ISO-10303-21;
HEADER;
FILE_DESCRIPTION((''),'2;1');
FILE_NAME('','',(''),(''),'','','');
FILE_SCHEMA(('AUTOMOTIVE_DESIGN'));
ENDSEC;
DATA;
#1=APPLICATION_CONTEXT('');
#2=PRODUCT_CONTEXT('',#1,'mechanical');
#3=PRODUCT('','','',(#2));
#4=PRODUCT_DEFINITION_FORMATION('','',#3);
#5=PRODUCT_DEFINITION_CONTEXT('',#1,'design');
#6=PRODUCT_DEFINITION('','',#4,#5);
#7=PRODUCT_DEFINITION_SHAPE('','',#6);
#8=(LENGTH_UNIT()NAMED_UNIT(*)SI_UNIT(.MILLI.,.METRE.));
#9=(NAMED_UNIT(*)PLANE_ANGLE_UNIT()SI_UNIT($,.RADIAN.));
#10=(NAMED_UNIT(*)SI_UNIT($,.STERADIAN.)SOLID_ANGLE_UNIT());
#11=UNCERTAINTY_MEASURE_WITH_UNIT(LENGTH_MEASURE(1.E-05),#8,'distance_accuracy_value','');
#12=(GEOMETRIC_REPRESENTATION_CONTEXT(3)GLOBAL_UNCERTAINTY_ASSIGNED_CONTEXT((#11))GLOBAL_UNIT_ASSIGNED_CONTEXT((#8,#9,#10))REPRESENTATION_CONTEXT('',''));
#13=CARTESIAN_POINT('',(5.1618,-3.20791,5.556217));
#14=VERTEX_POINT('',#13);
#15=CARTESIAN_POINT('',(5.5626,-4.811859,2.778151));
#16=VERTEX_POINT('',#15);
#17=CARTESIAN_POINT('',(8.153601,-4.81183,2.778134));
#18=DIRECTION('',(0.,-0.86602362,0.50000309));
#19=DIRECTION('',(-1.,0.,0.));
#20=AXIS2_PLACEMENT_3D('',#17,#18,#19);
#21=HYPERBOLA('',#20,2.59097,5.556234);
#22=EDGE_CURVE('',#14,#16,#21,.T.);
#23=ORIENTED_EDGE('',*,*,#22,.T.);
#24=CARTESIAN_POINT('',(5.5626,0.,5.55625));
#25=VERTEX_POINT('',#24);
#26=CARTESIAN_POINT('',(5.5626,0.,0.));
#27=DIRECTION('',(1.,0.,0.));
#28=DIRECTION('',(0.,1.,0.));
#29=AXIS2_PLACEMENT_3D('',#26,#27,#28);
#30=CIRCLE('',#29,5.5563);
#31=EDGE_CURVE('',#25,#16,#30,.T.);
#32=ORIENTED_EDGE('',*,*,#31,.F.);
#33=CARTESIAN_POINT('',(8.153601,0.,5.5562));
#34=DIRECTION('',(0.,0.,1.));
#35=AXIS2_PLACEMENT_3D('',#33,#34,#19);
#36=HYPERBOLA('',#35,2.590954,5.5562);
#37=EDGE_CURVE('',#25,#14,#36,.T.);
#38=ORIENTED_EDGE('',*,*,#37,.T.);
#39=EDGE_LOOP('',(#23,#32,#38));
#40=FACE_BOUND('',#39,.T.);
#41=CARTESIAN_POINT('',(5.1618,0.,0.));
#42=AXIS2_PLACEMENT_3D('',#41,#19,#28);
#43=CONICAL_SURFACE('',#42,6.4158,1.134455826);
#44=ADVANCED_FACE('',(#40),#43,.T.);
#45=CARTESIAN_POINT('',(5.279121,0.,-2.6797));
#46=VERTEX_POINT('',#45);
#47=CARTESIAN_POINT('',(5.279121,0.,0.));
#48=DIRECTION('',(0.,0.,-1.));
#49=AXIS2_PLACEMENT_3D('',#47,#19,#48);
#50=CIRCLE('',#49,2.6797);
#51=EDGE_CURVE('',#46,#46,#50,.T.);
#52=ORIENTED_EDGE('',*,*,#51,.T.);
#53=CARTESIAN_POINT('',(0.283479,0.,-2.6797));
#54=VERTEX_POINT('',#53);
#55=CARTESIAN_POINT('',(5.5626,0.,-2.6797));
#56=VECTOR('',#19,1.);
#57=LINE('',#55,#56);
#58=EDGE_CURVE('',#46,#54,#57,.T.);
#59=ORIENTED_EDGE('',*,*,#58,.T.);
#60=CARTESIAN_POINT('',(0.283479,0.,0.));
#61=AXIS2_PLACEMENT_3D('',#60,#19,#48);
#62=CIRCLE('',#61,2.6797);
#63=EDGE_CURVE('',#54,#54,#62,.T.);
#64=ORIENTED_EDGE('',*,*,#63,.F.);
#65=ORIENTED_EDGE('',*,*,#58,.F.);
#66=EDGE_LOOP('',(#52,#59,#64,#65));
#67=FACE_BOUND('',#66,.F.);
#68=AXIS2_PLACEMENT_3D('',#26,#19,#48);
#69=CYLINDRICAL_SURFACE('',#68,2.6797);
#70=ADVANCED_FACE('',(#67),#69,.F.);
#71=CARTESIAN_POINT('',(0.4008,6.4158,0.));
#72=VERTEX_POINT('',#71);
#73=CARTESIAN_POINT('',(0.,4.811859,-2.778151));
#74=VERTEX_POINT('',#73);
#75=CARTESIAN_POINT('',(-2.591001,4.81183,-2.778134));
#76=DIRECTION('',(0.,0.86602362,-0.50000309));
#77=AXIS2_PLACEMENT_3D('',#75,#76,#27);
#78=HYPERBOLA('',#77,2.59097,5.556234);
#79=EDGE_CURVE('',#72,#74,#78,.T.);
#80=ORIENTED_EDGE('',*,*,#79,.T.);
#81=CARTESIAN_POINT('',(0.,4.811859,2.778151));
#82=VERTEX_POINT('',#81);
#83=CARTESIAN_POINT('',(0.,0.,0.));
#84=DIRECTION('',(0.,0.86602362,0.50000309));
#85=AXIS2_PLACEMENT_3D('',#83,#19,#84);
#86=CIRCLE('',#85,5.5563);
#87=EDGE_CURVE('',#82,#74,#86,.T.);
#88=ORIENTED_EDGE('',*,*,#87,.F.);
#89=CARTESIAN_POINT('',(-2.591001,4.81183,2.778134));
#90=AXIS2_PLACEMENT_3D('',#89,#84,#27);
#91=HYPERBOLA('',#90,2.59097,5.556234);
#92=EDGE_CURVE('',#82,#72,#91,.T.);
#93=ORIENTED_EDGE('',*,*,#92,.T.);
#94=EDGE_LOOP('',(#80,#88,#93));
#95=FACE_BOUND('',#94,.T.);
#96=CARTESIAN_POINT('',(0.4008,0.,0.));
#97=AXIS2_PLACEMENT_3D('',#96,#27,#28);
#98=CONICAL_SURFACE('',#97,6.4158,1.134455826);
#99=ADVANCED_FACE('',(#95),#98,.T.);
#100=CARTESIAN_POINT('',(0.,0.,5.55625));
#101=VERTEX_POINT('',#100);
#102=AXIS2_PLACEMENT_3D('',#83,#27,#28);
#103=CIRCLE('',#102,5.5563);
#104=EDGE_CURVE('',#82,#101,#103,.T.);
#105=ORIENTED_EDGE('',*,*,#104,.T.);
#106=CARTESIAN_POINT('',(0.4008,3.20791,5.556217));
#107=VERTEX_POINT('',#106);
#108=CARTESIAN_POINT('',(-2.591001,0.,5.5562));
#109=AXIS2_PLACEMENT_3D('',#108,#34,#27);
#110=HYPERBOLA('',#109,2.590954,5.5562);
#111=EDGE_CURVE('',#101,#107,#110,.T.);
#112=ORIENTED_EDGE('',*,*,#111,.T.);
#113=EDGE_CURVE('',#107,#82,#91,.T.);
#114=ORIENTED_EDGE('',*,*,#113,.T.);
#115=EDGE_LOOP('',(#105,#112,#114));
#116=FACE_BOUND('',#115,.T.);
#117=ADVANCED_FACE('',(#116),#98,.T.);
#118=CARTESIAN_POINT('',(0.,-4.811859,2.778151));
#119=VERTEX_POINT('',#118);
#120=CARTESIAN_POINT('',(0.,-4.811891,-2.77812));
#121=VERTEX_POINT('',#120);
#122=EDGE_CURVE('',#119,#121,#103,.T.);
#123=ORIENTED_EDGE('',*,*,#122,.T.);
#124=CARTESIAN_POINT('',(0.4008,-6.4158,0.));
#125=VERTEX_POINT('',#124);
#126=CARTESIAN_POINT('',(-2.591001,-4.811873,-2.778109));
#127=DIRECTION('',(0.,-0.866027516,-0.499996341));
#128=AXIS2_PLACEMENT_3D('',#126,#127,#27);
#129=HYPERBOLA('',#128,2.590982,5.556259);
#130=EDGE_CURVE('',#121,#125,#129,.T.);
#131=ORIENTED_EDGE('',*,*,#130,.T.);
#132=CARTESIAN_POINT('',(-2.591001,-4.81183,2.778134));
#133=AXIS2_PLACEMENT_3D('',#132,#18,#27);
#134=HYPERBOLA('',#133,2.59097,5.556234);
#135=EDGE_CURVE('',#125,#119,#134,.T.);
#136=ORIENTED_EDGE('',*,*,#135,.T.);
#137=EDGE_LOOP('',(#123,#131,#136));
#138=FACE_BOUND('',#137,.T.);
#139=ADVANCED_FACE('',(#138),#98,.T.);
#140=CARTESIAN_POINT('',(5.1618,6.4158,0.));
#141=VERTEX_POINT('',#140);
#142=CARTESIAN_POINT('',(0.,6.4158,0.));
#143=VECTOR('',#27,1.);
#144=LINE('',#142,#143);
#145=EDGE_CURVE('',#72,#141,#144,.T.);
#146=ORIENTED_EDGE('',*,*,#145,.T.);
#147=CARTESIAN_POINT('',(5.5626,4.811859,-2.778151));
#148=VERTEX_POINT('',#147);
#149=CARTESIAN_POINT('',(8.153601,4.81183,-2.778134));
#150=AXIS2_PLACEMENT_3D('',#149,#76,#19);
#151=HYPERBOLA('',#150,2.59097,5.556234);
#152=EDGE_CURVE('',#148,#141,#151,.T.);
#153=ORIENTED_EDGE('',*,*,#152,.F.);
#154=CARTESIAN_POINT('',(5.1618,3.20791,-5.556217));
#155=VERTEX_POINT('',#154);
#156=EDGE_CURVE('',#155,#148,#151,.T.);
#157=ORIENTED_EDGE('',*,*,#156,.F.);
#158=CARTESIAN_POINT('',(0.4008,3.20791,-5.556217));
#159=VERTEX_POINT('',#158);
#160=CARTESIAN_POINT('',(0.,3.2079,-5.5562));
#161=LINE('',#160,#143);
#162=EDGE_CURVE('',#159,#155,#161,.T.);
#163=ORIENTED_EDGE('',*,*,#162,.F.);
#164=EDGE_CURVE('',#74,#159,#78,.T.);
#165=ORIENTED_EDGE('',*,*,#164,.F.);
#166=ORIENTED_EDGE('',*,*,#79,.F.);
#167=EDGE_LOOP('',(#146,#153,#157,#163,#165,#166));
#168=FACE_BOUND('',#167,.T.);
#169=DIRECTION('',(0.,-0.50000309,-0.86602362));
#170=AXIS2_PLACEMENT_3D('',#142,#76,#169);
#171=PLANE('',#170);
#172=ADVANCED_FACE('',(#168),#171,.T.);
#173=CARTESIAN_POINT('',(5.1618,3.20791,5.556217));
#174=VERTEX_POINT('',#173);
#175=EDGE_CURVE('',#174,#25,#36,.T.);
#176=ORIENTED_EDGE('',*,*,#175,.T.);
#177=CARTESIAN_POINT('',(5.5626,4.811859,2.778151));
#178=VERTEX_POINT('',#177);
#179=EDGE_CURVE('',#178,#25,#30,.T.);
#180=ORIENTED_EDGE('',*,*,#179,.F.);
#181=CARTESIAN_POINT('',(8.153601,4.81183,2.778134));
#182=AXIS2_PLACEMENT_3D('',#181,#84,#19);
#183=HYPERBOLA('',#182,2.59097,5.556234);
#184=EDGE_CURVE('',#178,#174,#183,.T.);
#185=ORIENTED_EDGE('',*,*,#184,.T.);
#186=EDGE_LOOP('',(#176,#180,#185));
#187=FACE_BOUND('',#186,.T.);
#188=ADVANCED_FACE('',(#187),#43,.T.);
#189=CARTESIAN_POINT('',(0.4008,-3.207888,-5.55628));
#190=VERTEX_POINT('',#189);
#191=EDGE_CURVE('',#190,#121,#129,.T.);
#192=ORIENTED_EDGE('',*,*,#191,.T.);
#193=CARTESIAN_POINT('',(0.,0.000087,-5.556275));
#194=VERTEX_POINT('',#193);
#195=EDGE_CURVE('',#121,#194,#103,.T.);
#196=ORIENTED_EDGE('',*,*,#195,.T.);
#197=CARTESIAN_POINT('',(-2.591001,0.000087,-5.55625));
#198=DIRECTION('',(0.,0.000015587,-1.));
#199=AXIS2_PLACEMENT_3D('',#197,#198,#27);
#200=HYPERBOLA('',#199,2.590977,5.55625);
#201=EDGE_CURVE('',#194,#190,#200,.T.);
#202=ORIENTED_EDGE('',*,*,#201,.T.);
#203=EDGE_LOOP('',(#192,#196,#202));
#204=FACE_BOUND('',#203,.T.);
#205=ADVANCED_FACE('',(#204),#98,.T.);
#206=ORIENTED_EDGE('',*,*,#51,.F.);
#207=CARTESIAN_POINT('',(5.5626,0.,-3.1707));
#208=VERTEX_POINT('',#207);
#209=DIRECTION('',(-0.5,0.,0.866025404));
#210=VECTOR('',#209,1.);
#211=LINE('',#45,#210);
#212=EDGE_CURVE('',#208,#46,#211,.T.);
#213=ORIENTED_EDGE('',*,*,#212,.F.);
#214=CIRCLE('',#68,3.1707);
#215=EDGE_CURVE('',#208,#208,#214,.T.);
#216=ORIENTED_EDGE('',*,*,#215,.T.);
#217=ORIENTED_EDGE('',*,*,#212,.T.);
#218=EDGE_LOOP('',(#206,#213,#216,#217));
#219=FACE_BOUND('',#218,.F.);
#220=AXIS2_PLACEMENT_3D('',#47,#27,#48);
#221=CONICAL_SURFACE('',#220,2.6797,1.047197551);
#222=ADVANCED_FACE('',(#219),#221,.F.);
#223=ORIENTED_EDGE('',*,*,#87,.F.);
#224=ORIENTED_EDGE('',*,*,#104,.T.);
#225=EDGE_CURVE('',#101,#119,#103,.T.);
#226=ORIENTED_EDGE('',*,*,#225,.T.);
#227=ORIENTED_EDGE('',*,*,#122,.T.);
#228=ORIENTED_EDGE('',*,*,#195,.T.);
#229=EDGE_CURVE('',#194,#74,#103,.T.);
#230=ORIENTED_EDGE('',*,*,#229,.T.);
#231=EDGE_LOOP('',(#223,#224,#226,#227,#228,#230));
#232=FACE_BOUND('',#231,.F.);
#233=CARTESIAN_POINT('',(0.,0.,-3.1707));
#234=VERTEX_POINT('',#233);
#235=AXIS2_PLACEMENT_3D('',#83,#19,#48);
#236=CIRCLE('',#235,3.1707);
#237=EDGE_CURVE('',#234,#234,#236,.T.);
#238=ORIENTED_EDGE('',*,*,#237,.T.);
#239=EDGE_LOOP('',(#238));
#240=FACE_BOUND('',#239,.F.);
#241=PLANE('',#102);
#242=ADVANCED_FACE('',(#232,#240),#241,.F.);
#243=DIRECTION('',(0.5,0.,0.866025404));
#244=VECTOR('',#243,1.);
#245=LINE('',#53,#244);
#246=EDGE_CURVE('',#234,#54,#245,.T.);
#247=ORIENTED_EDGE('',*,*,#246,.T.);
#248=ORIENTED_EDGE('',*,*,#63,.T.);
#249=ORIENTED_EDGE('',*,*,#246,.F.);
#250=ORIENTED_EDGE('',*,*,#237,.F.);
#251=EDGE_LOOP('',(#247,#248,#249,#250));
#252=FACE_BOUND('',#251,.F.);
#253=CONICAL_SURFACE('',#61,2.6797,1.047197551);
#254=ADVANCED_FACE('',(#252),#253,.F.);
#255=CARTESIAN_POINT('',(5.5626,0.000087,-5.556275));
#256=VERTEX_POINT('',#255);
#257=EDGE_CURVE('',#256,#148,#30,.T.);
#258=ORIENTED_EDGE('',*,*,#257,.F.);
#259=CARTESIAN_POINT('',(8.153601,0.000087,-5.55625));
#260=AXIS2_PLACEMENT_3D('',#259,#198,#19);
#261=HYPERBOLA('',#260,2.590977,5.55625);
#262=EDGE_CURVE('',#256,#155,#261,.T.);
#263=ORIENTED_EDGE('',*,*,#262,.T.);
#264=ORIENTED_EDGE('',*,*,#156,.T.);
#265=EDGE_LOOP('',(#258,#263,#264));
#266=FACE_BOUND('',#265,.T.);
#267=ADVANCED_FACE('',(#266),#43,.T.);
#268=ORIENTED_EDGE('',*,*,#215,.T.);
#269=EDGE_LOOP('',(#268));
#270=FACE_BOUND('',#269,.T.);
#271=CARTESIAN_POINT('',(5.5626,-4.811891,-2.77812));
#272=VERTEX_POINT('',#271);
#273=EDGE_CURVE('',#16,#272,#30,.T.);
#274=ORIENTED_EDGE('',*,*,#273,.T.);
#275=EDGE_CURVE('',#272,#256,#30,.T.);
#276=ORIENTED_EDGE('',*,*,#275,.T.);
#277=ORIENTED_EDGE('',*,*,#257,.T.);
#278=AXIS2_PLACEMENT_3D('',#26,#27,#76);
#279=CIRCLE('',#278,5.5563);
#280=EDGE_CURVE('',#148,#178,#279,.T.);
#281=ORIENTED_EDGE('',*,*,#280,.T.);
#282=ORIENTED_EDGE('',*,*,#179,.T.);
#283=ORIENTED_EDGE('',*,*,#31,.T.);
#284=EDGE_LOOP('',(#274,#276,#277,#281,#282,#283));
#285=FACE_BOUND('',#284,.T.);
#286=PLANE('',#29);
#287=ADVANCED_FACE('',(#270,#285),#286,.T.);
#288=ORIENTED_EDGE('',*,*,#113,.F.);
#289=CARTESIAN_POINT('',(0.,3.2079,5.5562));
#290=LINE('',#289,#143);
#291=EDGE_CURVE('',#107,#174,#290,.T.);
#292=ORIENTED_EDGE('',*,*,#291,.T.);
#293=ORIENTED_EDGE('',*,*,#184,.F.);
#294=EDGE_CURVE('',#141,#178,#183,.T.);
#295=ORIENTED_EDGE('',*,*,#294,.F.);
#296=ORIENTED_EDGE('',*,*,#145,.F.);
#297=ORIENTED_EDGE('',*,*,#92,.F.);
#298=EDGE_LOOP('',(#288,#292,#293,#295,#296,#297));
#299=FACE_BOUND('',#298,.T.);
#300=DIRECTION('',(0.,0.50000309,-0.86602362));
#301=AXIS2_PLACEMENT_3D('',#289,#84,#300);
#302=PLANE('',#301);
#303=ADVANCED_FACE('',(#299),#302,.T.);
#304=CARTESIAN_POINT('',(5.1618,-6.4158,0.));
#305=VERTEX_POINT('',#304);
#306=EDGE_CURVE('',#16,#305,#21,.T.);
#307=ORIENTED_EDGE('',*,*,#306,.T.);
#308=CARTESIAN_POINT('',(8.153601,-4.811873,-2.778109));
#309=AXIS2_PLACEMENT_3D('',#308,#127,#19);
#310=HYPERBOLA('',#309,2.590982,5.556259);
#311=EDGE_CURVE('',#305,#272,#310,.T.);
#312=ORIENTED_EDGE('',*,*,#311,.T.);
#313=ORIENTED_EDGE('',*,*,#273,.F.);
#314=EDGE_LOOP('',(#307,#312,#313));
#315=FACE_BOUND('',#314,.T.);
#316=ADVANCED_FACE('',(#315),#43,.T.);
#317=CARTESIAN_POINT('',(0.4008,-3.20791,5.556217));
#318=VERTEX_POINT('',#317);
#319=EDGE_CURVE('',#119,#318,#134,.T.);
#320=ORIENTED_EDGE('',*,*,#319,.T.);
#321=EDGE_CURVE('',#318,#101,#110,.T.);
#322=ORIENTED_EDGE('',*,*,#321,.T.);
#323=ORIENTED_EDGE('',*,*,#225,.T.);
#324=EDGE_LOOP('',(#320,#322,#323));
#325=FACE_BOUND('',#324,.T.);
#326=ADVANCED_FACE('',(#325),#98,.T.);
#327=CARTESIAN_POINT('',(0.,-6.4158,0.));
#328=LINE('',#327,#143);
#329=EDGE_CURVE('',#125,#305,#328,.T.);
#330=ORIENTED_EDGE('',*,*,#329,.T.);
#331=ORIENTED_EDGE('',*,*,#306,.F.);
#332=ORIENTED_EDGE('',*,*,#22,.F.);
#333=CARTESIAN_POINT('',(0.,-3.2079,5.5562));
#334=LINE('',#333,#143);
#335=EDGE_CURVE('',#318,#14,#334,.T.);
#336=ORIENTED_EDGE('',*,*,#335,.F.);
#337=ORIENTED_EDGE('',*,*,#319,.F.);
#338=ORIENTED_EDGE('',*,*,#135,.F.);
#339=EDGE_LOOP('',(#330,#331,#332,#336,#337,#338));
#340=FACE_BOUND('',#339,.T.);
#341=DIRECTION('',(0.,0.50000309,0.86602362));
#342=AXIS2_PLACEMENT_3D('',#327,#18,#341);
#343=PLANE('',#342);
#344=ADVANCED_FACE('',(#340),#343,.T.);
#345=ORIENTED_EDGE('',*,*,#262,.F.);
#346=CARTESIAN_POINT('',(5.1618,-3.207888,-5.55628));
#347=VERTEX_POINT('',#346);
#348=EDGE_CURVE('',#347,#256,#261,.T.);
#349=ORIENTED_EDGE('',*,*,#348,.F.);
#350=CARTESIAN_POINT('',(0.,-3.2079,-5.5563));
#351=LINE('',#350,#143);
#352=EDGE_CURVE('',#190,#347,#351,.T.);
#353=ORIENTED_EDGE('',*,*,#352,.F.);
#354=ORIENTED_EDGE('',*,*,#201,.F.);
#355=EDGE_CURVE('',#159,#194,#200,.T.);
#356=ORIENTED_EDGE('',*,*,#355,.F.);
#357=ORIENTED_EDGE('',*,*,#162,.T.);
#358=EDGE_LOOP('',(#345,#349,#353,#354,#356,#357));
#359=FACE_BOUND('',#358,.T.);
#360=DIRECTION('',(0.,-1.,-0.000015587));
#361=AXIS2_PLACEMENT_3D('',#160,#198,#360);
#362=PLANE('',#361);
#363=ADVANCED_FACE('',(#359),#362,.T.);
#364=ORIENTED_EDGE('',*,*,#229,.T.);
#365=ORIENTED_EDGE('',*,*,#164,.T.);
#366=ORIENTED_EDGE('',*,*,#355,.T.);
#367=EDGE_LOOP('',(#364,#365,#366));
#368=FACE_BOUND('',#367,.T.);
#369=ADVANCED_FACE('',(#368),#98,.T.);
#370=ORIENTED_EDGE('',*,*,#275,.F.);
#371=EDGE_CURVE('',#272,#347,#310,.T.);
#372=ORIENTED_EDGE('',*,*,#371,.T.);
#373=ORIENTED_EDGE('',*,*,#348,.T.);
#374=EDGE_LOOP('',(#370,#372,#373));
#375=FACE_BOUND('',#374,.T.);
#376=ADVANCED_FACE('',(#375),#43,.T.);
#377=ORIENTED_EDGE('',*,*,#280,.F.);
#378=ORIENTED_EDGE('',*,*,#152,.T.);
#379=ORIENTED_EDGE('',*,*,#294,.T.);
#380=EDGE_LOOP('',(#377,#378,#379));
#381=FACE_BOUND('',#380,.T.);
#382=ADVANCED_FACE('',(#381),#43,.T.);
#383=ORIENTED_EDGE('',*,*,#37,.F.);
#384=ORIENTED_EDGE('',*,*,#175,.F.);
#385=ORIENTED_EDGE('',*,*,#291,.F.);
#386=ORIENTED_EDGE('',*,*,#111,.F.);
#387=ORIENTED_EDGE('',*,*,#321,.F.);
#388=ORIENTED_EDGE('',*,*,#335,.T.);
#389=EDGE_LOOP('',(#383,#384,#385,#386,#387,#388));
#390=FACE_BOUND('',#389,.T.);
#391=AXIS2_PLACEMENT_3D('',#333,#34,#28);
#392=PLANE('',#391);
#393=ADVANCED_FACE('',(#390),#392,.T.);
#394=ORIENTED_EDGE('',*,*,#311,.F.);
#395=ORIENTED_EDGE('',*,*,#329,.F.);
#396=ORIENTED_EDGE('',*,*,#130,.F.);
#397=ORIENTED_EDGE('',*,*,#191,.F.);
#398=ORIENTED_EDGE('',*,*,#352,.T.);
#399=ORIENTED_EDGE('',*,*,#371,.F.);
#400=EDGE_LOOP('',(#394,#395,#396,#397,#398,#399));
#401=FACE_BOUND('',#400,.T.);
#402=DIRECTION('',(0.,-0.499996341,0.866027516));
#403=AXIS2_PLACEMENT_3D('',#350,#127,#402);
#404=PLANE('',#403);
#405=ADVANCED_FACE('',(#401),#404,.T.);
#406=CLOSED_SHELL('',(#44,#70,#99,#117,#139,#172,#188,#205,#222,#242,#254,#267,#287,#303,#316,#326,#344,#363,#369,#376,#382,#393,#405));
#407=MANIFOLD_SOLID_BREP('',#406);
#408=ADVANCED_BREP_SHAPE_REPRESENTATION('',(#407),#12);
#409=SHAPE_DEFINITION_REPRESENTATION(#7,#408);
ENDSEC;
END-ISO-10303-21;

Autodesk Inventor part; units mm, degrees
ref_plane "YZ Plane" through (0, 0, 0) normal (1, 0, 0) x (0, 1, 0)
ref_plane "XZ Plane" through (0, 0, 0) normal (0, 1, 0) x (-1, 0, 0)
sketch "Sketch1" plane through (0, 0, 0) normal (1, 0, 0) x (0, 1, 0)
  line L0 (-6.4158, 0) -> (-3.2079, 5.5562)
  line L1 (-3.2079, 5.5562) -> (3.2079, 5.5562)
  line L2 (3.2079, 5.5562) -> (6.4158, 0)
  line L3 (6.4158, 0) -> (3.2079, -5.5562)
  line L4 (3.2079, -5.5562) -> (-3.2079, -5.5563)
  line L5 (-3.2079, -5.5563) -> (-6.4158, 0)
  point P0 (0, 0)
  point P1 (0, 0)
  dimension "d0" = 12.8316
extrude "Body" add sketch "Sketch1" along normal blind 5.5626
sketch "Sketch2" plane through (0, 0, 0) normal (0, 0, 1) x (1, 0, 0)
  line L0 (0, 3.2079) -> (0, 6.4158) projected
  line L1 (0, 6.4158) -> (5.5626, 6.4158) projected
  line L2 (5.5626, 3.2079) -> (5.5626, 6.4158) projected
  line L3 (-1.1125, 0) -> (6.6751, 0) projected
  line L4 (0.4008, 6.4158) -> (0, 5.5563)
  line L5 (5.1618, 6.4158) -> (5.5626, 5.5563)
  dimension "d3" = 25
  dimension "d4" = 25
  dimension "d5" = 11.1125
  dimension "d6" = 11.1125
revolve "Chamfer1" cut sketch "Sketch2" angle 360 about axis through (-10, 0, 0) along (1, 0, 0)
sketch "Sketch3" plane through (5.5626, 0, 0) normal (1, 0, 0) x (0, 0, -1)
  arc A0 (-2.7781, -4.8119) -> (2.7781, -4.8119) centre (0, 0) ccw projected
hole "Thread" at (5.5626, 0, 0) direction (-1, 0, 0) diameter 5.3594 end through all thread size "1/4-28 UNF" class "2B" standard "ANSI Unified Screw Threads"
chamfer "Chamfer2" distance 0.491 angle 30 1 edges at (5.5626, 0, 2.6797) measured on face at (5.5626, 4.5706, -0.1077)
chamfer "Chamfer3" distance 0.491 angle 30 1 edges at (0, 0, 2.6797) measured on face at (0, 4.5706, -0.1077)
ref_plane "Work Plane1" through (-12.3002, 0, 0) normal (0, -0.8660254, -0.5) x (1, 0, 0)
equation "\"d0\" = 1.1547 * SW"
equation "\"d1\" = KOH"
equation "\"d3\" = ANG1"
equation "\"d4\" = ANG2"
equation "\"d5\" = SW0"
equation "\"d6\" = SW01"
equation "\"d8\" = -0.5 * GD1 + 0.5 * NND"
equation "\"d40\" = -0.5 * GD1 + 0.5 * NND"
equation "\"d10\" = -0.5 * GD1 + 0.5 * NND"
equation "\"d41\" = -0.5 * GD1 + 0.5 * NND"
equation "\"ANG1\" = 25deg"
equation "\"ANG2\" = 25deg"
equation "\"NND\" = 6.35"
equation "\"KOH\" = 5.5626"
equation "\"SW\" = 11.1125"
equation "\"SW0\" = SW"
equation "\"SW01\" = SW"
equation "\"THREADDIA\" = 6.35"
equation "\"TOA\" = 30deg"
equation "\"E0\" = 1.155 * SW"
equation "\"GD1\" = 5.367989"
properties part number "ANSI B18.2.2 - 1/4 - 28" material "Steel, Mild"
